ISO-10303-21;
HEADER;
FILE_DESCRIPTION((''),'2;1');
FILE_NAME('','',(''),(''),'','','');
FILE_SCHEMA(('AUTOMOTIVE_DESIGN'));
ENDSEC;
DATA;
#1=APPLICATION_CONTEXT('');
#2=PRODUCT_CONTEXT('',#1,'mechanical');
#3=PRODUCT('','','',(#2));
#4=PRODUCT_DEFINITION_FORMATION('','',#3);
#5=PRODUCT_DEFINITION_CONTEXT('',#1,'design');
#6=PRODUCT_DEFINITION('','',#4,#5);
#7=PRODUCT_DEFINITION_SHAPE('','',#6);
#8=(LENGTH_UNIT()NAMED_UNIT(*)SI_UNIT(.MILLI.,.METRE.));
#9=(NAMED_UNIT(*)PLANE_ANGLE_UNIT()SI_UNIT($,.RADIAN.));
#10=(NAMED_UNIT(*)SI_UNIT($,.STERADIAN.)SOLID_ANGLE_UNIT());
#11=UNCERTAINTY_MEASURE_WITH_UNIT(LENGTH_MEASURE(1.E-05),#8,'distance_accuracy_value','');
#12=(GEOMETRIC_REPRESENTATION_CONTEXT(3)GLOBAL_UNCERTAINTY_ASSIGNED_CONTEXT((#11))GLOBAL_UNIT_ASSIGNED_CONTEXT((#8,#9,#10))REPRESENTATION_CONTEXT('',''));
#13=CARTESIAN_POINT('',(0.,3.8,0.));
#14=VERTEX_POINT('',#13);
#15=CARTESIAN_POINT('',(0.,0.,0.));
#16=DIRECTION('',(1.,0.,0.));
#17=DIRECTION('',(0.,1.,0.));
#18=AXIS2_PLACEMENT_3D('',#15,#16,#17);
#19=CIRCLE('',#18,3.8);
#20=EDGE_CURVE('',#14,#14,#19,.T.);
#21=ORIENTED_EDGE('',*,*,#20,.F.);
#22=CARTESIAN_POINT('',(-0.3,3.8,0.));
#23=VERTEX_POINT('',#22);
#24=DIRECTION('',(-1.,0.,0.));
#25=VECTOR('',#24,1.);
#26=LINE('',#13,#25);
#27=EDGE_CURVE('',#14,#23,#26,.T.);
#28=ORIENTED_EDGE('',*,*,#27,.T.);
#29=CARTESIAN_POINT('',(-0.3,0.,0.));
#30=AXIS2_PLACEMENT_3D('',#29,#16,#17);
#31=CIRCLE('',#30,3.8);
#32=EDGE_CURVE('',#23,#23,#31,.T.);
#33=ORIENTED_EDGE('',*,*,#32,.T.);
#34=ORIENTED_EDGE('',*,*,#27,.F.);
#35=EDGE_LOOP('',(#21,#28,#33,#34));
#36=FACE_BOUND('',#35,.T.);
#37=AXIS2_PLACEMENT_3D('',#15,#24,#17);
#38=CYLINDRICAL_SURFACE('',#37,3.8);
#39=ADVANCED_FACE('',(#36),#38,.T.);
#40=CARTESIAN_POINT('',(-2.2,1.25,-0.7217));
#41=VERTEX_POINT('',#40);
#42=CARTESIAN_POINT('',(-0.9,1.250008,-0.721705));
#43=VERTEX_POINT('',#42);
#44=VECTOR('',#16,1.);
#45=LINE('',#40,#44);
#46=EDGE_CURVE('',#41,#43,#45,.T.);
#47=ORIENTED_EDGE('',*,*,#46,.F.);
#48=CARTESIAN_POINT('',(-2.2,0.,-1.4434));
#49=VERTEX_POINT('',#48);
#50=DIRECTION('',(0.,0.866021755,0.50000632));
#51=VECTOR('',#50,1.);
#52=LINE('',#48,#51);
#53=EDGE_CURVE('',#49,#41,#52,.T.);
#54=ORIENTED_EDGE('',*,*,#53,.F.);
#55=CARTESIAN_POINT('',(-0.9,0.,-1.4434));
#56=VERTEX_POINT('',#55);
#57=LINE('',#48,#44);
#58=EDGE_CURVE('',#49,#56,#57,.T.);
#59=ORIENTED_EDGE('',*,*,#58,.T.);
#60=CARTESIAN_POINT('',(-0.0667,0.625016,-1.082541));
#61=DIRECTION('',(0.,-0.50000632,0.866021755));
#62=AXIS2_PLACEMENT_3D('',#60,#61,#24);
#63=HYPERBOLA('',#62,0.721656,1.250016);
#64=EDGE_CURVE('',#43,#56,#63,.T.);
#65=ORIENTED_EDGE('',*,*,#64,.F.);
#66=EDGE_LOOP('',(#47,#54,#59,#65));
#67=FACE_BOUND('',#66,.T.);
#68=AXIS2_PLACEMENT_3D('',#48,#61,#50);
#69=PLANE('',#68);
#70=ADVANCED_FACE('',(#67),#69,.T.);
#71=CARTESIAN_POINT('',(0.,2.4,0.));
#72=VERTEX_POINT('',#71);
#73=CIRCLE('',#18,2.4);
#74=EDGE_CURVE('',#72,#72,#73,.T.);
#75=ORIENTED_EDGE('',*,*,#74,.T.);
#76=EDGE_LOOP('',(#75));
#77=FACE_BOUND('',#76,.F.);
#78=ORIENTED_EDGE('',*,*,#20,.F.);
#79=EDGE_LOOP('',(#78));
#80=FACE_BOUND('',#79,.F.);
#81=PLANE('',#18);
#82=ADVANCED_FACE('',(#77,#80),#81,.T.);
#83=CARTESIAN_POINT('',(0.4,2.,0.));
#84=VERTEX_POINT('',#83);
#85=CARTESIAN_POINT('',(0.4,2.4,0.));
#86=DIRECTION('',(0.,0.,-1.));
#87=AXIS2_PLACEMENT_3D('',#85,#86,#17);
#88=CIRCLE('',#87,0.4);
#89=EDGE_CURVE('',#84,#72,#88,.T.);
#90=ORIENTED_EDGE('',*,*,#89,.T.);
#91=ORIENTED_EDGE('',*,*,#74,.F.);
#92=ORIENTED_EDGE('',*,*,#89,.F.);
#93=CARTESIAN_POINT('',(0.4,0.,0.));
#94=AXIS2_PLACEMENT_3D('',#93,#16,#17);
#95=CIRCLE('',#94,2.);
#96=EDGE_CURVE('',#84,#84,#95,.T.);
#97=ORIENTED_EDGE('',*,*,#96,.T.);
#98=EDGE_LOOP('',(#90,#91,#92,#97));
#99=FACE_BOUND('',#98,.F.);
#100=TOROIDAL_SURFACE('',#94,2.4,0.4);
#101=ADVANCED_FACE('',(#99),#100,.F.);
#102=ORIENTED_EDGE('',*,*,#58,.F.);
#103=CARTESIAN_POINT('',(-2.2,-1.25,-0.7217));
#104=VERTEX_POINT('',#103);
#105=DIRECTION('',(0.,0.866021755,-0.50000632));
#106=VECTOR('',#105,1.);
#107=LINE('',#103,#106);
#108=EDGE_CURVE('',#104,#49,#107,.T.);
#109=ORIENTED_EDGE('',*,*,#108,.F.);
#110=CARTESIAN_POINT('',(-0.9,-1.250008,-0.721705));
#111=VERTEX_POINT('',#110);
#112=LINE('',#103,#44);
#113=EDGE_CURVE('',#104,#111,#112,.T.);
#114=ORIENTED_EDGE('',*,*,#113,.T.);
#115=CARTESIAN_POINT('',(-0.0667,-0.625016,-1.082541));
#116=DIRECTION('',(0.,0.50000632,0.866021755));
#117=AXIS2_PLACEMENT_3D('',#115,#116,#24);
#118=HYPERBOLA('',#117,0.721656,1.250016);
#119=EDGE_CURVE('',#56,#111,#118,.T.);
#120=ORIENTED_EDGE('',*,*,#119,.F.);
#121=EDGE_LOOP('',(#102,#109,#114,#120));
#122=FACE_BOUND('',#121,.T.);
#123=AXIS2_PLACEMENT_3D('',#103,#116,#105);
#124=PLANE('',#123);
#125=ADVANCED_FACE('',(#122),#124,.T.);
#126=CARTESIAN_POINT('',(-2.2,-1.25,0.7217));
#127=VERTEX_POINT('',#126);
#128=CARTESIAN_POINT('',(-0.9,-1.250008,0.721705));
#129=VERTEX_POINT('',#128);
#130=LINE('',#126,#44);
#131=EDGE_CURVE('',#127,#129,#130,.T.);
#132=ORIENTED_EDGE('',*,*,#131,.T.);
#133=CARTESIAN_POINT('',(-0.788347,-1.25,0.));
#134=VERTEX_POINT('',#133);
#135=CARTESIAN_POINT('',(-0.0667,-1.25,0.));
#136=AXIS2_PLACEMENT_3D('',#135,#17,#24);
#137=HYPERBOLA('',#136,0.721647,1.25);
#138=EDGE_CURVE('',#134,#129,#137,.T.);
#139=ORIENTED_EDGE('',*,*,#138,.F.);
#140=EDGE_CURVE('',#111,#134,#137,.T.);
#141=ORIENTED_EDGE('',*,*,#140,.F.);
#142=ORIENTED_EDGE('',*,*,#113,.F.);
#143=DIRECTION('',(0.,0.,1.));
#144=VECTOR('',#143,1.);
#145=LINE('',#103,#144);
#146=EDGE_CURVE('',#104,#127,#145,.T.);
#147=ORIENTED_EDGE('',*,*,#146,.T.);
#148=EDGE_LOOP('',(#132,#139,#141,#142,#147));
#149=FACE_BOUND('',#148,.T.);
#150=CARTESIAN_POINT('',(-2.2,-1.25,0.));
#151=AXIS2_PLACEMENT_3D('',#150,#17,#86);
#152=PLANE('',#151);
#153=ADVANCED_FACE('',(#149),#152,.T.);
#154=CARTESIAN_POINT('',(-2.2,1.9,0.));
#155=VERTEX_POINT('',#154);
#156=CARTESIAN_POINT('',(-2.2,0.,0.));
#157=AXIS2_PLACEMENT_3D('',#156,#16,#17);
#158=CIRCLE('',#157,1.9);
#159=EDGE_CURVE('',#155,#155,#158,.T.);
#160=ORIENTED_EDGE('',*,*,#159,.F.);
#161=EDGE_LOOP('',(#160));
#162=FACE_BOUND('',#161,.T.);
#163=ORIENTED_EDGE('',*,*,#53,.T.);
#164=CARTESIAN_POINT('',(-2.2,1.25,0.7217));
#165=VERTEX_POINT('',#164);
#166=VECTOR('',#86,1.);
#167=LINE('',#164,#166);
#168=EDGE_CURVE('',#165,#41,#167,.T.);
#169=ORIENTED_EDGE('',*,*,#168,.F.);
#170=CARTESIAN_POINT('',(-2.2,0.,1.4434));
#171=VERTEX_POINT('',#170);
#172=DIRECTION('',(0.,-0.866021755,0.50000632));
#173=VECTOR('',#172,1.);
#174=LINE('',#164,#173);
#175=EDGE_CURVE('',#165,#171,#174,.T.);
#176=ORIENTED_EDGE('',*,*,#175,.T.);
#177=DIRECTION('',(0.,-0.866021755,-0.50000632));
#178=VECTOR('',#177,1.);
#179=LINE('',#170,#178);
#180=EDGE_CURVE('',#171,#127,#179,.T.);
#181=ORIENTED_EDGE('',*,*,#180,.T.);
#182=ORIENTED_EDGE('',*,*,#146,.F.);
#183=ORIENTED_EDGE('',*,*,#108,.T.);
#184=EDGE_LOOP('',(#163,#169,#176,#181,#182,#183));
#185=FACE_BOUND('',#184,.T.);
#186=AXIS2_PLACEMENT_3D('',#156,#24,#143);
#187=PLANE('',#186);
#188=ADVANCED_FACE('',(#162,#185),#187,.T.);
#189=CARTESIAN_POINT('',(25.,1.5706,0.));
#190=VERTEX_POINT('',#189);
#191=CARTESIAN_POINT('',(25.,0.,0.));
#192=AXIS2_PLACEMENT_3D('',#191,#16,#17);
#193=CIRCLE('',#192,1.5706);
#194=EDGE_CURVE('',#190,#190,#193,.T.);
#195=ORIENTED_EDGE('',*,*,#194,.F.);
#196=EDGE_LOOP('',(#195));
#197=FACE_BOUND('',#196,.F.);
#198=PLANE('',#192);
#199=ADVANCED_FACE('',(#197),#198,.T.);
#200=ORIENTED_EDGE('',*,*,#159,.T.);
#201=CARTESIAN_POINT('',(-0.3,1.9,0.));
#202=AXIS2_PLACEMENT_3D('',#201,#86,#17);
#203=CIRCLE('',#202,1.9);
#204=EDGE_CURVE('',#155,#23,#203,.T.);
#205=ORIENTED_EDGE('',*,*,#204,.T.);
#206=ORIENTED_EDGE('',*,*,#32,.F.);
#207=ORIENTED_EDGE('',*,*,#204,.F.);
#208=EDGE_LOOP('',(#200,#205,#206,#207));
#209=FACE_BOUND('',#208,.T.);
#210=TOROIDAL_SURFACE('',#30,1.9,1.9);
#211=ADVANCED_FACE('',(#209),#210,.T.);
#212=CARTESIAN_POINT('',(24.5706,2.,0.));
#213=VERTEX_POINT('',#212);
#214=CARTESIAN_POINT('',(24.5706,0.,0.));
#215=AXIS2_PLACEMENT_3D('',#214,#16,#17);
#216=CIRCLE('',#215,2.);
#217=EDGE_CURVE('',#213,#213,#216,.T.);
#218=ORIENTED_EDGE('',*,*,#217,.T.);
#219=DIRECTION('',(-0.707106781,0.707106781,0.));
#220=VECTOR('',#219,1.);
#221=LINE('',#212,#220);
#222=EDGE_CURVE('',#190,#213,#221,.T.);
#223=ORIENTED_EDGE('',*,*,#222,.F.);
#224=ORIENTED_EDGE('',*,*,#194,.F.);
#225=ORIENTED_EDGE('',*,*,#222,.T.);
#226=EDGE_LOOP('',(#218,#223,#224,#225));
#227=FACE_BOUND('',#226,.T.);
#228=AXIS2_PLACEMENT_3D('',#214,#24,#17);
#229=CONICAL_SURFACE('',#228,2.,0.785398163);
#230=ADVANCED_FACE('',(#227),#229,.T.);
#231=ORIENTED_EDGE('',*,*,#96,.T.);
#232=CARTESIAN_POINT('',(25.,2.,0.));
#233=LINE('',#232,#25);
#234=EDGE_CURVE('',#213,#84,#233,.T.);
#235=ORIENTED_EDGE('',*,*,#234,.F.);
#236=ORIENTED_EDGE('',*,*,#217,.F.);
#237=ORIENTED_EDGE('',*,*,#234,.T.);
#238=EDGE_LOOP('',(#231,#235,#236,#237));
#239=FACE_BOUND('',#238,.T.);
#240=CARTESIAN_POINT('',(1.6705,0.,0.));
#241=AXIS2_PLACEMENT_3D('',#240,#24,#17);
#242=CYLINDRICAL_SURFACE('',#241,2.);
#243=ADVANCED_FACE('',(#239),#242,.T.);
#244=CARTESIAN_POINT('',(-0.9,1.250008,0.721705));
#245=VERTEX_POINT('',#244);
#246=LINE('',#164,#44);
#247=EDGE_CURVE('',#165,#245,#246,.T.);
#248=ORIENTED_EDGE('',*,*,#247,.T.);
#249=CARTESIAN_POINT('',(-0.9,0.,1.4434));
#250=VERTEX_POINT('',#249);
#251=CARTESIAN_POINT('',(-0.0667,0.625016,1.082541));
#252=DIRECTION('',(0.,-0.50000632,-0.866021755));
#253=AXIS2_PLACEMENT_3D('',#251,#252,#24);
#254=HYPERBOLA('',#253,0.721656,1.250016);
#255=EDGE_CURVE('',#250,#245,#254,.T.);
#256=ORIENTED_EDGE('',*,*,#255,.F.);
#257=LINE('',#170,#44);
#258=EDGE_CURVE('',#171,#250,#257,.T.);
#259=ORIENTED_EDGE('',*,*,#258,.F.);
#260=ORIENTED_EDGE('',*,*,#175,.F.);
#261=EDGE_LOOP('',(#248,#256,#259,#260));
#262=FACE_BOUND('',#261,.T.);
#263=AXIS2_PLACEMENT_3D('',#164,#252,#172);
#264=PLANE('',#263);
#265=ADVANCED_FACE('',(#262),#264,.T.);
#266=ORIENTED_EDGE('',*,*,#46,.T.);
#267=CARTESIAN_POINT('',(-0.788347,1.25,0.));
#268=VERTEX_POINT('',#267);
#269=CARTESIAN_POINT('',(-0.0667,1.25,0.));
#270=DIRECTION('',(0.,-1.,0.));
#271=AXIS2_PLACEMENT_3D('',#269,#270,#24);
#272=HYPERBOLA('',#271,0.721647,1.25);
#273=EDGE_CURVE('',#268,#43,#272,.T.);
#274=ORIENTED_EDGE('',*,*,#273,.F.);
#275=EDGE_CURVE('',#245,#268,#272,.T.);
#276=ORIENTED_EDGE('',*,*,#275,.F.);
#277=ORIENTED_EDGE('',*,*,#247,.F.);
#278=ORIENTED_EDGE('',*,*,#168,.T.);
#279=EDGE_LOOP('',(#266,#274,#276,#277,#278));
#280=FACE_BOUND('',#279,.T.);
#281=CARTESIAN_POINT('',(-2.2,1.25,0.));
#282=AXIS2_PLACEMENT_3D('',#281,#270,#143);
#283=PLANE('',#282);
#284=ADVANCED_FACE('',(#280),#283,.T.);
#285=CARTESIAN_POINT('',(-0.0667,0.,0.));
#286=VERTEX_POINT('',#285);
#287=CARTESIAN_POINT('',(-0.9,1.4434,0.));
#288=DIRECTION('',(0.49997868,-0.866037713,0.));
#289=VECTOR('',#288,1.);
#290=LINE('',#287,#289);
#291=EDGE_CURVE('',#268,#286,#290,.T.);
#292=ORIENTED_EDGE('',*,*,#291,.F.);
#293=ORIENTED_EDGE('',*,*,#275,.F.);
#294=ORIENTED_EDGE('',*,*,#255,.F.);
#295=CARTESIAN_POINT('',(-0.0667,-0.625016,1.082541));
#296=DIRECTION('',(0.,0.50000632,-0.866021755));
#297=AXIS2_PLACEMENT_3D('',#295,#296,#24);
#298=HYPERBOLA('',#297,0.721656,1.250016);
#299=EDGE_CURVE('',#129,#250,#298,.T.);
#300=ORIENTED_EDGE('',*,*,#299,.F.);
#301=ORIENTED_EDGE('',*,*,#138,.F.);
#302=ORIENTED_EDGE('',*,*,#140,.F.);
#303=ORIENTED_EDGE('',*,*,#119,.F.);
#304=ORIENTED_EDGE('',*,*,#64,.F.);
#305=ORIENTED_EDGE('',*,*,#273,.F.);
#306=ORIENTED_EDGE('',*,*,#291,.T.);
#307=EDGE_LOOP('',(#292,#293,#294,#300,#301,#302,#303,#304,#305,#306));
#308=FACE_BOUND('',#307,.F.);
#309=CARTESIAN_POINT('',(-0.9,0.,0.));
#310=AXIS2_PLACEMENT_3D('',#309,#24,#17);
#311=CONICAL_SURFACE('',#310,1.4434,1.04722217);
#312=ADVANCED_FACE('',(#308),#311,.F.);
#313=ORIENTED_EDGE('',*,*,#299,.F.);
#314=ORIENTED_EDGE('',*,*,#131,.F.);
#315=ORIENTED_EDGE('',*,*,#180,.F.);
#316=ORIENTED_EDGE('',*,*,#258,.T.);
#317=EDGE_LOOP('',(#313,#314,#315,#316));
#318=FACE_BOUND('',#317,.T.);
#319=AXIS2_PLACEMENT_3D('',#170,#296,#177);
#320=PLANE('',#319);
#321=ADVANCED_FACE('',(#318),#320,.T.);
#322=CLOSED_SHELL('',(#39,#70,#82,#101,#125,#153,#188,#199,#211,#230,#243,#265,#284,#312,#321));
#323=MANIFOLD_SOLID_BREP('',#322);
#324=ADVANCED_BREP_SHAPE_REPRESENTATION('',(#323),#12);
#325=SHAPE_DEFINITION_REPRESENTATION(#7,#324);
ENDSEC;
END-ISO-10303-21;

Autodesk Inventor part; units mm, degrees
ref_plane "YZ Plane" through (0, 0, 0) normal (1, 0, 0) x (0, 1, 0)
ref_plane "XZ Plane" through (0, 0, 0) normal (0, 1, 0) x (-1, 0, 0)
sketch "Эскиз1" plane through (0, 0, 0) normal (0, 0, 1) x (1, 0, 0)
  line L0 (-0.0667, 0) -> (25, 0)
  line L1 (25, 0) -> (25, 2)
  line L2 (25, 2) -> (2.1, 2)
  line L3 (2.1, 2) -> (1.6705, 2)
  line L4 (1.6705, 2) -> (0, 2)
  line L5 (0, 2) -> (0, 3.8)
  line L6 (0, 3.8) -> (-2.2, 3.8)
  line L7 (-2.2, 3.8) -> (-2.2, 1.4434)
  line L8 (-2.2, 1.4434) -> (-0.9, 1.4434)
  line L9 (-0.9, 1.4434) -> (-0.0667, 0)
  line L10 (-7.64, 0) -> (30.44, 0) projected
  line L11 (0, -0.76) -> (0, 4.56) projected
  line L12 (2.1, 2) -> (0, 2) construction
  dimension "d1" = 22.9
  dimension "d2" = 0.4295
  dimension "d3" = 2.2
  dimension "d4" = 1.3
  dimension "d5" = 60
  dimension "d6" = 4
  dimension "d7" = 4
  dimension "d8" = 2.8868
  dimension "d9" = 7.6
  dimension "d26" = 25
revolve "Базовый элемент" add sketch "Эскиз1" angle 360 about axis through (-0.0667, 0, 0) along (1, 0, 0)
sketch "Эскиз2" plane through (-2.2, 0, 0) normal (-1, 0, 0) x (0, 0, 1)
  circle A0 centre (0, 0) radius 1.4434 projected
  line L0 (0, -5.32) -> (0, 5.32) projected
  line L1 (-5.32, 0) -> (5.32, 0) projected
  line L2 (1.4434, 0) -> (0.7217, -1.25)
  line L3 (0.7217, -1.25) -> (-0.7217, -1.25)
  line L4 (-0.7217, -1.25) -> (-1.4434, 0)
  line L5 (-1.4434, 0) -> (-0.7217, 1.25)
  line L6 (-0.7217, 1.25) -> (0.7217, 1.25)
  line L7 (0.7217, 1.25) -> (1.4434, 0)
extrude "Паз" add sketch "Эскиз2" against normal up to next contours L7 A0 | A0 L2 | L6 L0 A0 | A0 L0 L3 | L0 L6 A0 | A0 L3 L0 | L4 A0 | A0 L5
fillet "Сопряжение1" radius 1.9 1 edges at (-2.2, -3.8, 0)
thread "Резьба" size "M4x0.7" class "6g" standard "ISO Metric profile" length 22.9
chamfer "Фаска1" distance 0.4294 distance2 0.4294 1 edges at (25, -2, 0) measured on face at (25, 0.6473, 0.1595)
ref_plane "Work Plane1" through (29, 0, 0) normal (0, -1, 0) x (1, 0, 0)
fillet "Сопряжение2" radius 0.4 1 edges at (0, -2, 0)
equation "\"d17\" = RR"
equation "\"d13\" = GEL"
equation "\"d15\" = -0.5 * SPD + 0.5 * GD"
equation "\"d16\" = GUL"
equation "\"d30\" = R"
equation "\"d1\" = GEL"
equation "\"d3\" = KOH"
equation "\"d4\" = INTI"
equation "\"d6\" = GD"
equation "\"d7\" = BDM"
equation "\"d8\" = 1.1547 * SW"
equation "\"d9\" = KOD"
equation "\"d26\" = NLG"
equation "\"GD\" = NND"
equation "\"NLG\" = 25"
equation "\"GEL\" = 22.9"
equation "\"KOD\" = 7.6"
equation "\"KOH\" = 2.2"
equation "\"INTI\" = 1.3"
equation "\"GAL\" = 0.61345 * PTC"
equation "\"GUL\" = 0.61345 * PTC"
equation "\"BDM\" = NND"
equation "\"SW\" = 2.5"
equation "\"RR\" = 1.9"
equation "\"SPD\" = NND - 1.2269 * PTC"
equation "\"R\" = 0.4"
equation "\"TOA\" = 30deg"
equation "\"GD1\" = THREADDIA - 1.2269 * PTC"
equation "\"THREADDIA\" = 4"
equation "\"PTC\" = 0.7"
equation "\"NND\" = 4"
equation "\"KOH1\" = 0.3"
equation "\"E0\" = 2.873"
properties part number "ISO 7380-1 - M4 x 25" material "Сталь"
